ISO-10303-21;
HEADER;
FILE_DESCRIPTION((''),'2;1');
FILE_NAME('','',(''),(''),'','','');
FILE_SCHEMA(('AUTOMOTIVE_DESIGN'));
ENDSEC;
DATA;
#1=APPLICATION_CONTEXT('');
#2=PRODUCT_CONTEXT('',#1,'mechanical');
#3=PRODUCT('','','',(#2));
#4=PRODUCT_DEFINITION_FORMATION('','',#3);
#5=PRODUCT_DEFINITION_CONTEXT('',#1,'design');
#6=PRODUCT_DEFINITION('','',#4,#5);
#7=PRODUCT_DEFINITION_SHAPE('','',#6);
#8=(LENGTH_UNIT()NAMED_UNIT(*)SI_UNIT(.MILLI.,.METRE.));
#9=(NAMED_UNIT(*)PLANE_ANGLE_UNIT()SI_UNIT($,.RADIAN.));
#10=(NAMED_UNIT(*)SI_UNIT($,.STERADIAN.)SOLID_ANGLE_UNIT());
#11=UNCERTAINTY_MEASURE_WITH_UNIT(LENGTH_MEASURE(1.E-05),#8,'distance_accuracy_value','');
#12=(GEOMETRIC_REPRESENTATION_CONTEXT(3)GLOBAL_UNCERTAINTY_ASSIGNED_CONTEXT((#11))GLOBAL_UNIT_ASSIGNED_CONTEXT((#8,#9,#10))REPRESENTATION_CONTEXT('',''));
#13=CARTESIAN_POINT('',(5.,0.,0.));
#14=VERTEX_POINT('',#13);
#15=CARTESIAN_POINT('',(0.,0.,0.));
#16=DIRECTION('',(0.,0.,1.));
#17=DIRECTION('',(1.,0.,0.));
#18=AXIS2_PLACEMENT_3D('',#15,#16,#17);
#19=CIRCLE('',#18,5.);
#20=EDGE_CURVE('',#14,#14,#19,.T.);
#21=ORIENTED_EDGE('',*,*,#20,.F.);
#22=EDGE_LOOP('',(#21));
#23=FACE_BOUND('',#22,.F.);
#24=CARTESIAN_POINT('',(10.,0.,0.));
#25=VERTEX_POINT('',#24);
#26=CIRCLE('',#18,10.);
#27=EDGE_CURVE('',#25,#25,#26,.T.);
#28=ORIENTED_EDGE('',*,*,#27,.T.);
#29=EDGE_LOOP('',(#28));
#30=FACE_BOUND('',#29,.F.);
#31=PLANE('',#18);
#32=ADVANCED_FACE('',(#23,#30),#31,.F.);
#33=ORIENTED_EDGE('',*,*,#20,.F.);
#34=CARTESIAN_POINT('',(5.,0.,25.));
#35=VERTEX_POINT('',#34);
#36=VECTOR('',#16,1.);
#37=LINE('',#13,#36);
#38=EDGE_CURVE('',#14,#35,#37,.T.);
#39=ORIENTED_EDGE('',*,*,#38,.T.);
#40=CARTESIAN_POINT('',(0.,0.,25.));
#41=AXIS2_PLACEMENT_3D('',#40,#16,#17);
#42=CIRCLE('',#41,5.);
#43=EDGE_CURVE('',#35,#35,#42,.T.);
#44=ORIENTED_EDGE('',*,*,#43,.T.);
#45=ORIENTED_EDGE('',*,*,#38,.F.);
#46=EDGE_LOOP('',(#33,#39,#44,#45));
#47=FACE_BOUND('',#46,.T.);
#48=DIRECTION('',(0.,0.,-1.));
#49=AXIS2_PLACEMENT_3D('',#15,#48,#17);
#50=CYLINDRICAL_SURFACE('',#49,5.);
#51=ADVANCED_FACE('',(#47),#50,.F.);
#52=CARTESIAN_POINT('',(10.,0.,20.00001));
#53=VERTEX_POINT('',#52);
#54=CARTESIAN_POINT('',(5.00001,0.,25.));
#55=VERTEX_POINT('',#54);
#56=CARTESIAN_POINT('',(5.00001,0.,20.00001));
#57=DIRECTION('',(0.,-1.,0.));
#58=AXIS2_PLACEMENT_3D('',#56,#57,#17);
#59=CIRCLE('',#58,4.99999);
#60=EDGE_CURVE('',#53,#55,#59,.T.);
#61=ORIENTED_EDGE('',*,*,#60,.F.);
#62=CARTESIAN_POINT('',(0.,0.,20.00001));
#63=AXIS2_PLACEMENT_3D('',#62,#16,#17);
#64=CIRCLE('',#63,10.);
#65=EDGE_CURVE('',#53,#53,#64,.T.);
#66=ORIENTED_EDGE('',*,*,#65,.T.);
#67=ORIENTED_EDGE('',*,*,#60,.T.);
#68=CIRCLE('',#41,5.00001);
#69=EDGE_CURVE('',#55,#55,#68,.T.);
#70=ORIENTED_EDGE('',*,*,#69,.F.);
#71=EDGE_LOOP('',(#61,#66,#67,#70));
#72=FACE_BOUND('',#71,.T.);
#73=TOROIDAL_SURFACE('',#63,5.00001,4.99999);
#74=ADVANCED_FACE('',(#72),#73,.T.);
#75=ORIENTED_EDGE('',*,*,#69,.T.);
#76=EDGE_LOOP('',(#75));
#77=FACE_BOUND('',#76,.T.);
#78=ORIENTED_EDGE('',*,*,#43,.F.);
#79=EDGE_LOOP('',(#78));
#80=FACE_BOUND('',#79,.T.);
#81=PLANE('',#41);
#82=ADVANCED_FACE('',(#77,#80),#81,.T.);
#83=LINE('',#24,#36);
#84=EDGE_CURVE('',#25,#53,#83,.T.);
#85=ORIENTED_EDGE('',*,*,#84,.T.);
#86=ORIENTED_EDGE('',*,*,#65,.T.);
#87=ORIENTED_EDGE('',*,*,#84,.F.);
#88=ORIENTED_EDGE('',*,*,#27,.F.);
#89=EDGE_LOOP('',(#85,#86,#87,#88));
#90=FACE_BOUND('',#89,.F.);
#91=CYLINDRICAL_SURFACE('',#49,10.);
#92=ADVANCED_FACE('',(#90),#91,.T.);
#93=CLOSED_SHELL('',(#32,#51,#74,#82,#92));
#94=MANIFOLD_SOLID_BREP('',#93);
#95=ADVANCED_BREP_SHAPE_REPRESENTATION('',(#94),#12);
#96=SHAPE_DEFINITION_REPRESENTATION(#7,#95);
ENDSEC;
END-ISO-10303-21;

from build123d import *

# Parameters (mm, degrees)
F0_R     = 10
F0_R_2   = 5
F1_DEPTH = 25
F2_DEPTH = 25
F3_R     = 4.99999


# Not quite as in the source:
# - a fillet or chamfer is up to 0.001 mm smaller than in the source, because OpenCascade refuses the exact size


with BuildPart() as f1:
    # F0 (on Top) → F1 (new body)
    with BuildSketch(Plane.XY):
        Circle(F0_R)
        Circle(F0_R_2, mode=Mode.SUBTRACT)
    extrude(amount=F1_DEPTH)

    # F0 (on Top) → F2 (join)
    with BuildSketch(Plane.XY):
        Circle(F0_R)
        Circle(F0_R_2, mode=Mode.SUBTRACT)
    extrude(amount=F2_DEPTH)

    # F3 (radius 5 in the source; OpenCascade refuses exactly that, so slightly less here)
    f3_edges = [f1.edges().sort_by_distance(p)[0] for p in [
        (-10, 0, 25),
    ]]
    fillet(f3_edges, radius=F3_R)


solid = f1.part
